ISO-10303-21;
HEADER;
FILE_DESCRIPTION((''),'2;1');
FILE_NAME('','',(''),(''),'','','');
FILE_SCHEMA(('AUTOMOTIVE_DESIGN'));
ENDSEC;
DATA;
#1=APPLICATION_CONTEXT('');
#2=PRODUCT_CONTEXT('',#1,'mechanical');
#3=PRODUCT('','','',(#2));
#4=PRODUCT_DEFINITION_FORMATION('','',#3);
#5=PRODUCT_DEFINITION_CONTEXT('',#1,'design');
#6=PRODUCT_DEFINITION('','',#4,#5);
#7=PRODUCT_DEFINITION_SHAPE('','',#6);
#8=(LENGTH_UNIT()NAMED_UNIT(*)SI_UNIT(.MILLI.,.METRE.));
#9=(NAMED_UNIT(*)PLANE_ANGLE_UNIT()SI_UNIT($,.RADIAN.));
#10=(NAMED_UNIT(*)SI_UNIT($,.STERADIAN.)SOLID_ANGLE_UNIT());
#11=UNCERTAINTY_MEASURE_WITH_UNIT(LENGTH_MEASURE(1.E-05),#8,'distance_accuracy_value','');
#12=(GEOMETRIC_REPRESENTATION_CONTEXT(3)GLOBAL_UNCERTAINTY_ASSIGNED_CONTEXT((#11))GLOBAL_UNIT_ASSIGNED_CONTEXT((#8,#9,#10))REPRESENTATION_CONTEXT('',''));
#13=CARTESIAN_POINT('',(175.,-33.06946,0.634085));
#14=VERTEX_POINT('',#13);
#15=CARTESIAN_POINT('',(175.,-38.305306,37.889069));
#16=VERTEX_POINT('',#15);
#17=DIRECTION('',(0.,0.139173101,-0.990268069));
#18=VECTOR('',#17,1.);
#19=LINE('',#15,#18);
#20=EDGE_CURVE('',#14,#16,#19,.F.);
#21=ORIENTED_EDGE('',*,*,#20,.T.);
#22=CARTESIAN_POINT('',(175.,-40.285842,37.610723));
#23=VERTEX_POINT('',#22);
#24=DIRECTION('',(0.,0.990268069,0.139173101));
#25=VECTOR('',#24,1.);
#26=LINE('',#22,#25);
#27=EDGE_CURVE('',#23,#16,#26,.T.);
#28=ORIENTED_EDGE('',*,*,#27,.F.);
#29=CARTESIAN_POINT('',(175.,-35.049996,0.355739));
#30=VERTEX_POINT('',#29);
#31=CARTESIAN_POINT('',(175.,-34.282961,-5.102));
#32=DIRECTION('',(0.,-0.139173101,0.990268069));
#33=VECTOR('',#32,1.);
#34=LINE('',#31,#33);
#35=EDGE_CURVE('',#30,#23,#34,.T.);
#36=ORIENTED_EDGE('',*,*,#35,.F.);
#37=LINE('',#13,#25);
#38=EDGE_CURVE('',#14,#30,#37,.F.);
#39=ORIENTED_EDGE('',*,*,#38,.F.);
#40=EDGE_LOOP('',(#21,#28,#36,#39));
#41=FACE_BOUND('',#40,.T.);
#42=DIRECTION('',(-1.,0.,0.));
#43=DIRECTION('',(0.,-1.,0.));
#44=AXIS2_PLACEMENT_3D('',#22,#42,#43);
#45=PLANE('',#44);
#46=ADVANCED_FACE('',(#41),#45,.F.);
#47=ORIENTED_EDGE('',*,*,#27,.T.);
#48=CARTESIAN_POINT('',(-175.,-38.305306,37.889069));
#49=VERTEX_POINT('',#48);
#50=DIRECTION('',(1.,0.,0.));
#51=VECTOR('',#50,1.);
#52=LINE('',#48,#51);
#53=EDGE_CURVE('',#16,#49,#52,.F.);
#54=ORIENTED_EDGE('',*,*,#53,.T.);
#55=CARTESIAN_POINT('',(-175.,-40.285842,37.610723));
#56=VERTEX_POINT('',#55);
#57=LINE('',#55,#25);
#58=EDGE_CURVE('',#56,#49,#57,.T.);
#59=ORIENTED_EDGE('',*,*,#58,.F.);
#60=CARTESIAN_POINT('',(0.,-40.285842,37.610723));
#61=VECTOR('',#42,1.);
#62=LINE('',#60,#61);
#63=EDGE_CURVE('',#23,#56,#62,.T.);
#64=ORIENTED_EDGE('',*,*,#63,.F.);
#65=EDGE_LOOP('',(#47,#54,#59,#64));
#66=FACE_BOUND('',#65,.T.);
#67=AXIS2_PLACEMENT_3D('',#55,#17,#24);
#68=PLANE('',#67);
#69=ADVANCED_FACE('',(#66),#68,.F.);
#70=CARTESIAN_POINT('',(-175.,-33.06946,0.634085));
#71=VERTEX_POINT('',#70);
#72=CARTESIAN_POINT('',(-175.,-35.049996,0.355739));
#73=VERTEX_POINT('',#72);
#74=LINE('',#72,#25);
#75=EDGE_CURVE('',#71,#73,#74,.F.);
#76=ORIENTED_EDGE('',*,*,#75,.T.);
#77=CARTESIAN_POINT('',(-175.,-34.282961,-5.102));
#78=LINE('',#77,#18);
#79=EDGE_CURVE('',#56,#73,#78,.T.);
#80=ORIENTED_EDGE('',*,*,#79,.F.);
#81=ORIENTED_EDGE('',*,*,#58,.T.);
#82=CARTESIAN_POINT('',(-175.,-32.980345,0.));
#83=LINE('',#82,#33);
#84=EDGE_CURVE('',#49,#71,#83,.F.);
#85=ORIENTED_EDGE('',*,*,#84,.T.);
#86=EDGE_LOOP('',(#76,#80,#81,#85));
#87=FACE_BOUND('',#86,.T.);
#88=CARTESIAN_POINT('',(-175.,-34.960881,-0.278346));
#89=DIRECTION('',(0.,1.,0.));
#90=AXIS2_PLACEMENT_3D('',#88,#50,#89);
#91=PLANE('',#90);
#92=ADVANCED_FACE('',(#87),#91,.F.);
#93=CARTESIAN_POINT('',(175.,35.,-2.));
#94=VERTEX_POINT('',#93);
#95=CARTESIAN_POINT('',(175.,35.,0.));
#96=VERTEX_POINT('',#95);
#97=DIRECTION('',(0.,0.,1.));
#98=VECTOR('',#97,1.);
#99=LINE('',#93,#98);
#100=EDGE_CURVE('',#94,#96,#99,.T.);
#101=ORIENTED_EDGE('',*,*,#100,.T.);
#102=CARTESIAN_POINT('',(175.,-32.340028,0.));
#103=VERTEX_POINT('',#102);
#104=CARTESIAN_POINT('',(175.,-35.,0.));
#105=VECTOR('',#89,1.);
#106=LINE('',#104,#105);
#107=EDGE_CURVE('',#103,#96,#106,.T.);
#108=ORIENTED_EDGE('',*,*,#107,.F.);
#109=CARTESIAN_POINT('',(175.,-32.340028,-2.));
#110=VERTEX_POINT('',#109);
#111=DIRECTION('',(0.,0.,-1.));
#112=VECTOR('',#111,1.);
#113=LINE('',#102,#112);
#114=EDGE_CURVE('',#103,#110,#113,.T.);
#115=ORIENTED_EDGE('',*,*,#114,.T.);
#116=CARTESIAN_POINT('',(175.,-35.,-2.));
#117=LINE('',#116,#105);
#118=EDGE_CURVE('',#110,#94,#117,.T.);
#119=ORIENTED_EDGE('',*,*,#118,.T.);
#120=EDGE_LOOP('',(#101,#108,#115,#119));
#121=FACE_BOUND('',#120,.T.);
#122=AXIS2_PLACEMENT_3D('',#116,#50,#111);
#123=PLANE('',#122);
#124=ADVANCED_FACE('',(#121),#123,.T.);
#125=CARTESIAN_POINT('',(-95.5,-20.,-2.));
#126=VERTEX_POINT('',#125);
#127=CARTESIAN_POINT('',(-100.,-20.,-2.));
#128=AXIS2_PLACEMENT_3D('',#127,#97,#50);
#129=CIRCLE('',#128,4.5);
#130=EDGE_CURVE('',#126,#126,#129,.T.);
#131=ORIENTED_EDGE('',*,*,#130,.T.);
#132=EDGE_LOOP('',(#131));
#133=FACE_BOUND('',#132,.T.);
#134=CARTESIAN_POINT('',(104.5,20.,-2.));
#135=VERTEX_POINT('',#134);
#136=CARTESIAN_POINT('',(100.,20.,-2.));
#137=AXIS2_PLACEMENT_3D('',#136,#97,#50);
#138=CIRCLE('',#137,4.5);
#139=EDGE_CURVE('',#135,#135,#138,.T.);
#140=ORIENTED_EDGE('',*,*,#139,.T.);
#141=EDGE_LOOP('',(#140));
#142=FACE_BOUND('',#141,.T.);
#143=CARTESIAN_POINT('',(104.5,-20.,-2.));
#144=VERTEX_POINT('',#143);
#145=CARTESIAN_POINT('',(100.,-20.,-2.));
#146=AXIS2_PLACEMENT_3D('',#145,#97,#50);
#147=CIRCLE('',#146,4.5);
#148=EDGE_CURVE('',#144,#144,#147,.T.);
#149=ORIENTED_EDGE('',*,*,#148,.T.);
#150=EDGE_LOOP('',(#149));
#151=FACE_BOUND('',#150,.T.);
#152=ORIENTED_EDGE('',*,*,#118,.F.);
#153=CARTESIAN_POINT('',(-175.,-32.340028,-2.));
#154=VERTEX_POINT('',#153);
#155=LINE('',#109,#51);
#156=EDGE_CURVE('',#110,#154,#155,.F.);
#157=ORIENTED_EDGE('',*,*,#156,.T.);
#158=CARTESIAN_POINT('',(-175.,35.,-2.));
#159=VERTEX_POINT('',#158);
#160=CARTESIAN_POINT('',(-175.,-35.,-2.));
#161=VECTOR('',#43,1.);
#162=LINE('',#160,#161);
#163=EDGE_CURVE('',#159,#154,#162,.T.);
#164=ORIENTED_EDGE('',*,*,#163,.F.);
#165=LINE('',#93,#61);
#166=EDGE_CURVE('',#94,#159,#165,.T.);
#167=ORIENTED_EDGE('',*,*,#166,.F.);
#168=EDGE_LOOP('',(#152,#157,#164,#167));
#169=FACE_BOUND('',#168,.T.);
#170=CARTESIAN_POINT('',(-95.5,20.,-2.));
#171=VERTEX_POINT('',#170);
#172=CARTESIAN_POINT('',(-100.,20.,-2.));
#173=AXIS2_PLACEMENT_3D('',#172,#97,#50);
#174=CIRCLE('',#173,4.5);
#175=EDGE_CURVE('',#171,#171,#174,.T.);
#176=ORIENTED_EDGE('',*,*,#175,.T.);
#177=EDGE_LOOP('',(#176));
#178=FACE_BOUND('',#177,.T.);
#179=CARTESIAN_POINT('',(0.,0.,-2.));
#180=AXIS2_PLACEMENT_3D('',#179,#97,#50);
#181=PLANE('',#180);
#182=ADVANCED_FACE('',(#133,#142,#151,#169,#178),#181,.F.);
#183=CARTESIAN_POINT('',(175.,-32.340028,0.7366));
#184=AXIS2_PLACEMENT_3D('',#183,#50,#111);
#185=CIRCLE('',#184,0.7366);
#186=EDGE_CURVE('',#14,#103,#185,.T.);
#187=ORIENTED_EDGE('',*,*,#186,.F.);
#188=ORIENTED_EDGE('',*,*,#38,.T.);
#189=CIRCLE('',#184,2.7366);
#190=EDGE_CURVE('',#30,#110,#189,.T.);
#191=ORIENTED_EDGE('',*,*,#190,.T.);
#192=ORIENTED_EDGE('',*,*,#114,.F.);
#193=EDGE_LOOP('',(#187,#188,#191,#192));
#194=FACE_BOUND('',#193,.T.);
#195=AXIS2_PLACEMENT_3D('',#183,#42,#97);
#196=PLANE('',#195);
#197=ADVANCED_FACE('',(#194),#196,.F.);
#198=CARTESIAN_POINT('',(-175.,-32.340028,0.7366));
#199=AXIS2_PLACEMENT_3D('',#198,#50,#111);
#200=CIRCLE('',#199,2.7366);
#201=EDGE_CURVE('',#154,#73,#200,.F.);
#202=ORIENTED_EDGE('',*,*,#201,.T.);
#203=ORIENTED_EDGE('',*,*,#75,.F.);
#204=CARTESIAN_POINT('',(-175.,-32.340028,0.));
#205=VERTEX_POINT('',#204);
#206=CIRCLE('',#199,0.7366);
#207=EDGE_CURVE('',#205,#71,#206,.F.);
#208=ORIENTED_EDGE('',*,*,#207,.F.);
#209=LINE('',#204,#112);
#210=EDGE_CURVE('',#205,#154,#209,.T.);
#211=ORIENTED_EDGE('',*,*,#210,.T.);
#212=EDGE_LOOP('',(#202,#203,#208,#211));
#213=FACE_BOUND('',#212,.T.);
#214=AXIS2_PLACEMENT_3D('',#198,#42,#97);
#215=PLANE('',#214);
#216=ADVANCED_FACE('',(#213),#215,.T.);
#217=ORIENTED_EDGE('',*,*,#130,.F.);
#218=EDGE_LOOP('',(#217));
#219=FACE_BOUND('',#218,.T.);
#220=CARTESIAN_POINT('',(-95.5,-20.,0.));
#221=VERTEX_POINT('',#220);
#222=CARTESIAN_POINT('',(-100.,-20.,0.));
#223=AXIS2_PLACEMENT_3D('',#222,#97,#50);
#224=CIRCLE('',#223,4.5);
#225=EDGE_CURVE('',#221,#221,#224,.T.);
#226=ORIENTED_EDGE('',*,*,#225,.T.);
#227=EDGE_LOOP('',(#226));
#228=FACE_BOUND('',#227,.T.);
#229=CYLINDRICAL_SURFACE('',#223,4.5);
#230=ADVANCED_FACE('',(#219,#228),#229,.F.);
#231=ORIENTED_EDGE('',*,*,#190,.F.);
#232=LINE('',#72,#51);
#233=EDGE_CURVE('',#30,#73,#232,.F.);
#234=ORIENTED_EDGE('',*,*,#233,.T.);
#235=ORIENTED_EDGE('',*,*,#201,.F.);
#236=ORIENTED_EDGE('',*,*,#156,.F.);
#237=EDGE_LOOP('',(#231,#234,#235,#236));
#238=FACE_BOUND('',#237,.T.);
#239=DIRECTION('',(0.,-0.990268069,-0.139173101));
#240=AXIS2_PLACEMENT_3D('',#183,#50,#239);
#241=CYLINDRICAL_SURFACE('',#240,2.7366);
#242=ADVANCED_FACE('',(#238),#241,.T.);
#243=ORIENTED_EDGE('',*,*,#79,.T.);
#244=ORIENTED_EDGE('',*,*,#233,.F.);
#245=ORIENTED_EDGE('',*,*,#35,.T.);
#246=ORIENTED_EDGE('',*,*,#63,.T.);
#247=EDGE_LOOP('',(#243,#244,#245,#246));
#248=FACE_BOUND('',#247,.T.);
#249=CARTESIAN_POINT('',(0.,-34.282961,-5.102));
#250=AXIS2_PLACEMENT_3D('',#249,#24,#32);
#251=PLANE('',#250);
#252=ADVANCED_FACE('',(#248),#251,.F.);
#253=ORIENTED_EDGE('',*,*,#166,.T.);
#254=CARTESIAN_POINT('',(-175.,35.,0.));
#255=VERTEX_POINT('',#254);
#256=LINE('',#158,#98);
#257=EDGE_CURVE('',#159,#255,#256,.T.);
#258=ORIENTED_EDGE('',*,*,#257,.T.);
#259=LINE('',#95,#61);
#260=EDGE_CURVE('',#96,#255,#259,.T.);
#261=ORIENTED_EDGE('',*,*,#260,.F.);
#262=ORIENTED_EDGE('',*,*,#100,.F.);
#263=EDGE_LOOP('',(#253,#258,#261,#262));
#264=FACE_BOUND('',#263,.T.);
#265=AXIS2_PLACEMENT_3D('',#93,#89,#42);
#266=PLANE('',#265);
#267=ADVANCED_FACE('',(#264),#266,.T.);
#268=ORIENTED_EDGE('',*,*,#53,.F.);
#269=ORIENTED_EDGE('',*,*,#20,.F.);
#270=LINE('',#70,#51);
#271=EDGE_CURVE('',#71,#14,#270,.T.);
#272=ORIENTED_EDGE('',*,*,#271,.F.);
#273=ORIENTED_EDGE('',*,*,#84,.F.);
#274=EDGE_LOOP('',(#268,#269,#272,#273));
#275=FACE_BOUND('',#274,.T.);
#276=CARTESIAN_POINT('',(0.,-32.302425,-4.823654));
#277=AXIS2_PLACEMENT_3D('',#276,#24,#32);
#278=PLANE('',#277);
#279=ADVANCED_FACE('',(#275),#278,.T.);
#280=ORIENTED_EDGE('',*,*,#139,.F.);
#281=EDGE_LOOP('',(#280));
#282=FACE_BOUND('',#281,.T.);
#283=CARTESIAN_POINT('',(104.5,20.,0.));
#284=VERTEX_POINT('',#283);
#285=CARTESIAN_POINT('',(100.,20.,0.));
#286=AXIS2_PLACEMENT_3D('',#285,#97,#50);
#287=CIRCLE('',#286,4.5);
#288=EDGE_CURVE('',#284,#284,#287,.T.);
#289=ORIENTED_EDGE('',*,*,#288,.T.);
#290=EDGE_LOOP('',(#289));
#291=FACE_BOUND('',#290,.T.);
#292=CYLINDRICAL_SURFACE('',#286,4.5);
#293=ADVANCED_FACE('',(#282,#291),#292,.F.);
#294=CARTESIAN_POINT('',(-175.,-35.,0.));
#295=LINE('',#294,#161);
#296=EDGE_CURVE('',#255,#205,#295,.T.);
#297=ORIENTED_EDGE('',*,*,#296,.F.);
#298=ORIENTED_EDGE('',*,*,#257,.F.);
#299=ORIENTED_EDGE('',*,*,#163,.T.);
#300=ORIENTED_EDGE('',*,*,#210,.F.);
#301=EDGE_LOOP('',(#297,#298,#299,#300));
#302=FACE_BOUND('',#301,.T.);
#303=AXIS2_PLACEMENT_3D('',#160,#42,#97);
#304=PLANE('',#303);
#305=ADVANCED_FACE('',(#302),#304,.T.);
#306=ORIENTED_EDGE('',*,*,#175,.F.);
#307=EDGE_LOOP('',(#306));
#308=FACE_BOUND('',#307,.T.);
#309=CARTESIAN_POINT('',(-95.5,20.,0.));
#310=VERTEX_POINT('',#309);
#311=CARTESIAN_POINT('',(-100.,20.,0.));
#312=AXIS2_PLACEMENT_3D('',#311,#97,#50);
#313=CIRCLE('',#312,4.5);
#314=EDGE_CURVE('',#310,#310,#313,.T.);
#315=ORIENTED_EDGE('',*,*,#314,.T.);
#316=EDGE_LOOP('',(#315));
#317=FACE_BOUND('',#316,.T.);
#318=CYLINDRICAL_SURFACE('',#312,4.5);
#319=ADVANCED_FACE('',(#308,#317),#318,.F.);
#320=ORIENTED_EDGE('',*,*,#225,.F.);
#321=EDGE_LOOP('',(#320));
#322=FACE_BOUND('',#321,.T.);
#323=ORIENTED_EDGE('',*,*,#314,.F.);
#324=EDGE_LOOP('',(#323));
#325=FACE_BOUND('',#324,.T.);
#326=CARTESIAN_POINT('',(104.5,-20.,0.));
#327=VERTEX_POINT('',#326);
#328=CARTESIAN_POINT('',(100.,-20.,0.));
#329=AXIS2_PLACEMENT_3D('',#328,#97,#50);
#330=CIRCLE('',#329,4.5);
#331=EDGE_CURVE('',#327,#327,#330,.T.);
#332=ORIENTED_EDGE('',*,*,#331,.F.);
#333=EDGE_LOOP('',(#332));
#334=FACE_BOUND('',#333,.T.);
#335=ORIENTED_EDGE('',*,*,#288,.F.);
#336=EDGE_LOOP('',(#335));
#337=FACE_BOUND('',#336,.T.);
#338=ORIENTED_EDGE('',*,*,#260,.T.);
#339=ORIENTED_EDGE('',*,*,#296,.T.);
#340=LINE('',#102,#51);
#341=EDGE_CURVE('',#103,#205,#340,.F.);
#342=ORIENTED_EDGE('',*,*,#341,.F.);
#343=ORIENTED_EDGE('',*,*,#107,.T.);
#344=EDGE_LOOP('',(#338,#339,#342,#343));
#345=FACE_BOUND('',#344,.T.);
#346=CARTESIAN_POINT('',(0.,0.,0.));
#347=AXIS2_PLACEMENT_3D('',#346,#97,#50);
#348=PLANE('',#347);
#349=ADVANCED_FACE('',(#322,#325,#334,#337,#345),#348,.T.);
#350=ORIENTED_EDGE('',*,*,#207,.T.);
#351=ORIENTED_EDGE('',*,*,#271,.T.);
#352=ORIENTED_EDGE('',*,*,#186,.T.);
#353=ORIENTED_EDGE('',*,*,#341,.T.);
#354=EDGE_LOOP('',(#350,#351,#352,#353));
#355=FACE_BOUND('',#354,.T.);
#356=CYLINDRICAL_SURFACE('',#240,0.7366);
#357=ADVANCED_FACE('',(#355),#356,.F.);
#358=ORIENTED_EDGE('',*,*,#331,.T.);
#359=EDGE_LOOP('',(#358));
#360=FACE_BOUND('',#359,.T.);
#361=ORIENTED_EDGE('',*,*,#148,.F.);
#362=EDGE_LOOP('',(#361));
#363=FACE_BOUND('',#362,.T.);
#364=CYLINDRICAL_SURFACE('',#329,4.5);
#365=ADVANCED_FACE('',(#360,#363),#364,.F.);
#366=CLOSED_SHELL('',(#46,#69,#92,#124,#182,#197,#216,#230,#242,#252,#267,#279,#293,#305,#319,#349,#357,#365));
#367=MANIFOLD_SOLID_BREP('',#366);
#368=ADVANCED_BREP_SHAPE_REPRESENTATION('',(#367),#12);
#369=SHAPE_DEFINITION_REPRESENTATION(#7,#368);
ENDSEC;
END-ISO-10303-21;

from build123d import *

# Parameters (mm, degrees)
SKETCH1_W            = 350
SKETCH1_H            = 70
BASE_FLANGE1_DEPTH   = 2
EDGE_FLANGE1_START   = -175
EDGE_FLANGE1_DEPTH   = 350
EDGE_FLANGE1_2_DEPTH = 350
M8_CLEARANCE_HOLE1_D = 9


# Read off the part's stored shape, not the designer's step: Edge-Flange1
# Sheet-metal steps are written as plain solids
with BuildPart() as part:
    # Sketch1 → Base-Flange1 (new body)
    with BuildSketch(Plane.XY):
        Rectangle(SKETCH1_W, SKETCH1_H)
    extrude(amount=-BASE_FLANGE1_DEPTH)

    # Edge-Flange1 outline → Edge-Flange1 (cut)
    with BuildSketch(Plane.YZ.offset(EDGE_FLANGE1_START)):
        with BuildLine():
            ThreePointArc((-32.340028244, -2), (-33.994295453, -1.443395312), (-34.975630642, 0))
            Line((-34.975630642, 0), (-35, 0))
            Line((-35, 0), (-35, -2))
            Line((-35, -2), (-32.340028244, -2))
        make_face()
    extrude(amount=EDGE_FLANGE1_DEPTH, mode=Mode.SUBTRACT)

    # Edge-Flange1 2 outline → Edge-Flange1 2 (add)
    with BuildSketch(Plane.YZ.offset(EDGE_FLANGE1_START)):
        with BuildLine():
            Line((-40.285842369, 37.61072275), (-35.049995841, 0.355738892))
            ThreePointArc((-35.049995841, 0.355738892), (-35.018725163, 0.176633592), (-34.975630642, 0))
            Line((-34.975630642, 0), (-32.340028244, 0))
            ThreePointArc((-32.340028244, 0), (-32.823281325, 0.180680923), (-33.069459703, 0.634085094))
            Line((-33.069459703, 0.634085094), (-38.305306232, 37.889068952))
            Line((-38.305306232, 37.889068952), (-40.285842369, 37.61072275))
        make_face()
    extrude(amount=EDGE_FLANGE1_2_DEPTH)

    # M8 Clearance Hole1 (through all)
    with Locations(Plane(origin=(-100, 20, 0), x_dir=(1, 0, 0), z_dir=(0, 0, 1))):
        with Locations((0, 0), (0, -40), (200, -40), (200, 0)):
            Hole(M8_CLEARANCE_HOLE1_D / 2)


solid = part.part
